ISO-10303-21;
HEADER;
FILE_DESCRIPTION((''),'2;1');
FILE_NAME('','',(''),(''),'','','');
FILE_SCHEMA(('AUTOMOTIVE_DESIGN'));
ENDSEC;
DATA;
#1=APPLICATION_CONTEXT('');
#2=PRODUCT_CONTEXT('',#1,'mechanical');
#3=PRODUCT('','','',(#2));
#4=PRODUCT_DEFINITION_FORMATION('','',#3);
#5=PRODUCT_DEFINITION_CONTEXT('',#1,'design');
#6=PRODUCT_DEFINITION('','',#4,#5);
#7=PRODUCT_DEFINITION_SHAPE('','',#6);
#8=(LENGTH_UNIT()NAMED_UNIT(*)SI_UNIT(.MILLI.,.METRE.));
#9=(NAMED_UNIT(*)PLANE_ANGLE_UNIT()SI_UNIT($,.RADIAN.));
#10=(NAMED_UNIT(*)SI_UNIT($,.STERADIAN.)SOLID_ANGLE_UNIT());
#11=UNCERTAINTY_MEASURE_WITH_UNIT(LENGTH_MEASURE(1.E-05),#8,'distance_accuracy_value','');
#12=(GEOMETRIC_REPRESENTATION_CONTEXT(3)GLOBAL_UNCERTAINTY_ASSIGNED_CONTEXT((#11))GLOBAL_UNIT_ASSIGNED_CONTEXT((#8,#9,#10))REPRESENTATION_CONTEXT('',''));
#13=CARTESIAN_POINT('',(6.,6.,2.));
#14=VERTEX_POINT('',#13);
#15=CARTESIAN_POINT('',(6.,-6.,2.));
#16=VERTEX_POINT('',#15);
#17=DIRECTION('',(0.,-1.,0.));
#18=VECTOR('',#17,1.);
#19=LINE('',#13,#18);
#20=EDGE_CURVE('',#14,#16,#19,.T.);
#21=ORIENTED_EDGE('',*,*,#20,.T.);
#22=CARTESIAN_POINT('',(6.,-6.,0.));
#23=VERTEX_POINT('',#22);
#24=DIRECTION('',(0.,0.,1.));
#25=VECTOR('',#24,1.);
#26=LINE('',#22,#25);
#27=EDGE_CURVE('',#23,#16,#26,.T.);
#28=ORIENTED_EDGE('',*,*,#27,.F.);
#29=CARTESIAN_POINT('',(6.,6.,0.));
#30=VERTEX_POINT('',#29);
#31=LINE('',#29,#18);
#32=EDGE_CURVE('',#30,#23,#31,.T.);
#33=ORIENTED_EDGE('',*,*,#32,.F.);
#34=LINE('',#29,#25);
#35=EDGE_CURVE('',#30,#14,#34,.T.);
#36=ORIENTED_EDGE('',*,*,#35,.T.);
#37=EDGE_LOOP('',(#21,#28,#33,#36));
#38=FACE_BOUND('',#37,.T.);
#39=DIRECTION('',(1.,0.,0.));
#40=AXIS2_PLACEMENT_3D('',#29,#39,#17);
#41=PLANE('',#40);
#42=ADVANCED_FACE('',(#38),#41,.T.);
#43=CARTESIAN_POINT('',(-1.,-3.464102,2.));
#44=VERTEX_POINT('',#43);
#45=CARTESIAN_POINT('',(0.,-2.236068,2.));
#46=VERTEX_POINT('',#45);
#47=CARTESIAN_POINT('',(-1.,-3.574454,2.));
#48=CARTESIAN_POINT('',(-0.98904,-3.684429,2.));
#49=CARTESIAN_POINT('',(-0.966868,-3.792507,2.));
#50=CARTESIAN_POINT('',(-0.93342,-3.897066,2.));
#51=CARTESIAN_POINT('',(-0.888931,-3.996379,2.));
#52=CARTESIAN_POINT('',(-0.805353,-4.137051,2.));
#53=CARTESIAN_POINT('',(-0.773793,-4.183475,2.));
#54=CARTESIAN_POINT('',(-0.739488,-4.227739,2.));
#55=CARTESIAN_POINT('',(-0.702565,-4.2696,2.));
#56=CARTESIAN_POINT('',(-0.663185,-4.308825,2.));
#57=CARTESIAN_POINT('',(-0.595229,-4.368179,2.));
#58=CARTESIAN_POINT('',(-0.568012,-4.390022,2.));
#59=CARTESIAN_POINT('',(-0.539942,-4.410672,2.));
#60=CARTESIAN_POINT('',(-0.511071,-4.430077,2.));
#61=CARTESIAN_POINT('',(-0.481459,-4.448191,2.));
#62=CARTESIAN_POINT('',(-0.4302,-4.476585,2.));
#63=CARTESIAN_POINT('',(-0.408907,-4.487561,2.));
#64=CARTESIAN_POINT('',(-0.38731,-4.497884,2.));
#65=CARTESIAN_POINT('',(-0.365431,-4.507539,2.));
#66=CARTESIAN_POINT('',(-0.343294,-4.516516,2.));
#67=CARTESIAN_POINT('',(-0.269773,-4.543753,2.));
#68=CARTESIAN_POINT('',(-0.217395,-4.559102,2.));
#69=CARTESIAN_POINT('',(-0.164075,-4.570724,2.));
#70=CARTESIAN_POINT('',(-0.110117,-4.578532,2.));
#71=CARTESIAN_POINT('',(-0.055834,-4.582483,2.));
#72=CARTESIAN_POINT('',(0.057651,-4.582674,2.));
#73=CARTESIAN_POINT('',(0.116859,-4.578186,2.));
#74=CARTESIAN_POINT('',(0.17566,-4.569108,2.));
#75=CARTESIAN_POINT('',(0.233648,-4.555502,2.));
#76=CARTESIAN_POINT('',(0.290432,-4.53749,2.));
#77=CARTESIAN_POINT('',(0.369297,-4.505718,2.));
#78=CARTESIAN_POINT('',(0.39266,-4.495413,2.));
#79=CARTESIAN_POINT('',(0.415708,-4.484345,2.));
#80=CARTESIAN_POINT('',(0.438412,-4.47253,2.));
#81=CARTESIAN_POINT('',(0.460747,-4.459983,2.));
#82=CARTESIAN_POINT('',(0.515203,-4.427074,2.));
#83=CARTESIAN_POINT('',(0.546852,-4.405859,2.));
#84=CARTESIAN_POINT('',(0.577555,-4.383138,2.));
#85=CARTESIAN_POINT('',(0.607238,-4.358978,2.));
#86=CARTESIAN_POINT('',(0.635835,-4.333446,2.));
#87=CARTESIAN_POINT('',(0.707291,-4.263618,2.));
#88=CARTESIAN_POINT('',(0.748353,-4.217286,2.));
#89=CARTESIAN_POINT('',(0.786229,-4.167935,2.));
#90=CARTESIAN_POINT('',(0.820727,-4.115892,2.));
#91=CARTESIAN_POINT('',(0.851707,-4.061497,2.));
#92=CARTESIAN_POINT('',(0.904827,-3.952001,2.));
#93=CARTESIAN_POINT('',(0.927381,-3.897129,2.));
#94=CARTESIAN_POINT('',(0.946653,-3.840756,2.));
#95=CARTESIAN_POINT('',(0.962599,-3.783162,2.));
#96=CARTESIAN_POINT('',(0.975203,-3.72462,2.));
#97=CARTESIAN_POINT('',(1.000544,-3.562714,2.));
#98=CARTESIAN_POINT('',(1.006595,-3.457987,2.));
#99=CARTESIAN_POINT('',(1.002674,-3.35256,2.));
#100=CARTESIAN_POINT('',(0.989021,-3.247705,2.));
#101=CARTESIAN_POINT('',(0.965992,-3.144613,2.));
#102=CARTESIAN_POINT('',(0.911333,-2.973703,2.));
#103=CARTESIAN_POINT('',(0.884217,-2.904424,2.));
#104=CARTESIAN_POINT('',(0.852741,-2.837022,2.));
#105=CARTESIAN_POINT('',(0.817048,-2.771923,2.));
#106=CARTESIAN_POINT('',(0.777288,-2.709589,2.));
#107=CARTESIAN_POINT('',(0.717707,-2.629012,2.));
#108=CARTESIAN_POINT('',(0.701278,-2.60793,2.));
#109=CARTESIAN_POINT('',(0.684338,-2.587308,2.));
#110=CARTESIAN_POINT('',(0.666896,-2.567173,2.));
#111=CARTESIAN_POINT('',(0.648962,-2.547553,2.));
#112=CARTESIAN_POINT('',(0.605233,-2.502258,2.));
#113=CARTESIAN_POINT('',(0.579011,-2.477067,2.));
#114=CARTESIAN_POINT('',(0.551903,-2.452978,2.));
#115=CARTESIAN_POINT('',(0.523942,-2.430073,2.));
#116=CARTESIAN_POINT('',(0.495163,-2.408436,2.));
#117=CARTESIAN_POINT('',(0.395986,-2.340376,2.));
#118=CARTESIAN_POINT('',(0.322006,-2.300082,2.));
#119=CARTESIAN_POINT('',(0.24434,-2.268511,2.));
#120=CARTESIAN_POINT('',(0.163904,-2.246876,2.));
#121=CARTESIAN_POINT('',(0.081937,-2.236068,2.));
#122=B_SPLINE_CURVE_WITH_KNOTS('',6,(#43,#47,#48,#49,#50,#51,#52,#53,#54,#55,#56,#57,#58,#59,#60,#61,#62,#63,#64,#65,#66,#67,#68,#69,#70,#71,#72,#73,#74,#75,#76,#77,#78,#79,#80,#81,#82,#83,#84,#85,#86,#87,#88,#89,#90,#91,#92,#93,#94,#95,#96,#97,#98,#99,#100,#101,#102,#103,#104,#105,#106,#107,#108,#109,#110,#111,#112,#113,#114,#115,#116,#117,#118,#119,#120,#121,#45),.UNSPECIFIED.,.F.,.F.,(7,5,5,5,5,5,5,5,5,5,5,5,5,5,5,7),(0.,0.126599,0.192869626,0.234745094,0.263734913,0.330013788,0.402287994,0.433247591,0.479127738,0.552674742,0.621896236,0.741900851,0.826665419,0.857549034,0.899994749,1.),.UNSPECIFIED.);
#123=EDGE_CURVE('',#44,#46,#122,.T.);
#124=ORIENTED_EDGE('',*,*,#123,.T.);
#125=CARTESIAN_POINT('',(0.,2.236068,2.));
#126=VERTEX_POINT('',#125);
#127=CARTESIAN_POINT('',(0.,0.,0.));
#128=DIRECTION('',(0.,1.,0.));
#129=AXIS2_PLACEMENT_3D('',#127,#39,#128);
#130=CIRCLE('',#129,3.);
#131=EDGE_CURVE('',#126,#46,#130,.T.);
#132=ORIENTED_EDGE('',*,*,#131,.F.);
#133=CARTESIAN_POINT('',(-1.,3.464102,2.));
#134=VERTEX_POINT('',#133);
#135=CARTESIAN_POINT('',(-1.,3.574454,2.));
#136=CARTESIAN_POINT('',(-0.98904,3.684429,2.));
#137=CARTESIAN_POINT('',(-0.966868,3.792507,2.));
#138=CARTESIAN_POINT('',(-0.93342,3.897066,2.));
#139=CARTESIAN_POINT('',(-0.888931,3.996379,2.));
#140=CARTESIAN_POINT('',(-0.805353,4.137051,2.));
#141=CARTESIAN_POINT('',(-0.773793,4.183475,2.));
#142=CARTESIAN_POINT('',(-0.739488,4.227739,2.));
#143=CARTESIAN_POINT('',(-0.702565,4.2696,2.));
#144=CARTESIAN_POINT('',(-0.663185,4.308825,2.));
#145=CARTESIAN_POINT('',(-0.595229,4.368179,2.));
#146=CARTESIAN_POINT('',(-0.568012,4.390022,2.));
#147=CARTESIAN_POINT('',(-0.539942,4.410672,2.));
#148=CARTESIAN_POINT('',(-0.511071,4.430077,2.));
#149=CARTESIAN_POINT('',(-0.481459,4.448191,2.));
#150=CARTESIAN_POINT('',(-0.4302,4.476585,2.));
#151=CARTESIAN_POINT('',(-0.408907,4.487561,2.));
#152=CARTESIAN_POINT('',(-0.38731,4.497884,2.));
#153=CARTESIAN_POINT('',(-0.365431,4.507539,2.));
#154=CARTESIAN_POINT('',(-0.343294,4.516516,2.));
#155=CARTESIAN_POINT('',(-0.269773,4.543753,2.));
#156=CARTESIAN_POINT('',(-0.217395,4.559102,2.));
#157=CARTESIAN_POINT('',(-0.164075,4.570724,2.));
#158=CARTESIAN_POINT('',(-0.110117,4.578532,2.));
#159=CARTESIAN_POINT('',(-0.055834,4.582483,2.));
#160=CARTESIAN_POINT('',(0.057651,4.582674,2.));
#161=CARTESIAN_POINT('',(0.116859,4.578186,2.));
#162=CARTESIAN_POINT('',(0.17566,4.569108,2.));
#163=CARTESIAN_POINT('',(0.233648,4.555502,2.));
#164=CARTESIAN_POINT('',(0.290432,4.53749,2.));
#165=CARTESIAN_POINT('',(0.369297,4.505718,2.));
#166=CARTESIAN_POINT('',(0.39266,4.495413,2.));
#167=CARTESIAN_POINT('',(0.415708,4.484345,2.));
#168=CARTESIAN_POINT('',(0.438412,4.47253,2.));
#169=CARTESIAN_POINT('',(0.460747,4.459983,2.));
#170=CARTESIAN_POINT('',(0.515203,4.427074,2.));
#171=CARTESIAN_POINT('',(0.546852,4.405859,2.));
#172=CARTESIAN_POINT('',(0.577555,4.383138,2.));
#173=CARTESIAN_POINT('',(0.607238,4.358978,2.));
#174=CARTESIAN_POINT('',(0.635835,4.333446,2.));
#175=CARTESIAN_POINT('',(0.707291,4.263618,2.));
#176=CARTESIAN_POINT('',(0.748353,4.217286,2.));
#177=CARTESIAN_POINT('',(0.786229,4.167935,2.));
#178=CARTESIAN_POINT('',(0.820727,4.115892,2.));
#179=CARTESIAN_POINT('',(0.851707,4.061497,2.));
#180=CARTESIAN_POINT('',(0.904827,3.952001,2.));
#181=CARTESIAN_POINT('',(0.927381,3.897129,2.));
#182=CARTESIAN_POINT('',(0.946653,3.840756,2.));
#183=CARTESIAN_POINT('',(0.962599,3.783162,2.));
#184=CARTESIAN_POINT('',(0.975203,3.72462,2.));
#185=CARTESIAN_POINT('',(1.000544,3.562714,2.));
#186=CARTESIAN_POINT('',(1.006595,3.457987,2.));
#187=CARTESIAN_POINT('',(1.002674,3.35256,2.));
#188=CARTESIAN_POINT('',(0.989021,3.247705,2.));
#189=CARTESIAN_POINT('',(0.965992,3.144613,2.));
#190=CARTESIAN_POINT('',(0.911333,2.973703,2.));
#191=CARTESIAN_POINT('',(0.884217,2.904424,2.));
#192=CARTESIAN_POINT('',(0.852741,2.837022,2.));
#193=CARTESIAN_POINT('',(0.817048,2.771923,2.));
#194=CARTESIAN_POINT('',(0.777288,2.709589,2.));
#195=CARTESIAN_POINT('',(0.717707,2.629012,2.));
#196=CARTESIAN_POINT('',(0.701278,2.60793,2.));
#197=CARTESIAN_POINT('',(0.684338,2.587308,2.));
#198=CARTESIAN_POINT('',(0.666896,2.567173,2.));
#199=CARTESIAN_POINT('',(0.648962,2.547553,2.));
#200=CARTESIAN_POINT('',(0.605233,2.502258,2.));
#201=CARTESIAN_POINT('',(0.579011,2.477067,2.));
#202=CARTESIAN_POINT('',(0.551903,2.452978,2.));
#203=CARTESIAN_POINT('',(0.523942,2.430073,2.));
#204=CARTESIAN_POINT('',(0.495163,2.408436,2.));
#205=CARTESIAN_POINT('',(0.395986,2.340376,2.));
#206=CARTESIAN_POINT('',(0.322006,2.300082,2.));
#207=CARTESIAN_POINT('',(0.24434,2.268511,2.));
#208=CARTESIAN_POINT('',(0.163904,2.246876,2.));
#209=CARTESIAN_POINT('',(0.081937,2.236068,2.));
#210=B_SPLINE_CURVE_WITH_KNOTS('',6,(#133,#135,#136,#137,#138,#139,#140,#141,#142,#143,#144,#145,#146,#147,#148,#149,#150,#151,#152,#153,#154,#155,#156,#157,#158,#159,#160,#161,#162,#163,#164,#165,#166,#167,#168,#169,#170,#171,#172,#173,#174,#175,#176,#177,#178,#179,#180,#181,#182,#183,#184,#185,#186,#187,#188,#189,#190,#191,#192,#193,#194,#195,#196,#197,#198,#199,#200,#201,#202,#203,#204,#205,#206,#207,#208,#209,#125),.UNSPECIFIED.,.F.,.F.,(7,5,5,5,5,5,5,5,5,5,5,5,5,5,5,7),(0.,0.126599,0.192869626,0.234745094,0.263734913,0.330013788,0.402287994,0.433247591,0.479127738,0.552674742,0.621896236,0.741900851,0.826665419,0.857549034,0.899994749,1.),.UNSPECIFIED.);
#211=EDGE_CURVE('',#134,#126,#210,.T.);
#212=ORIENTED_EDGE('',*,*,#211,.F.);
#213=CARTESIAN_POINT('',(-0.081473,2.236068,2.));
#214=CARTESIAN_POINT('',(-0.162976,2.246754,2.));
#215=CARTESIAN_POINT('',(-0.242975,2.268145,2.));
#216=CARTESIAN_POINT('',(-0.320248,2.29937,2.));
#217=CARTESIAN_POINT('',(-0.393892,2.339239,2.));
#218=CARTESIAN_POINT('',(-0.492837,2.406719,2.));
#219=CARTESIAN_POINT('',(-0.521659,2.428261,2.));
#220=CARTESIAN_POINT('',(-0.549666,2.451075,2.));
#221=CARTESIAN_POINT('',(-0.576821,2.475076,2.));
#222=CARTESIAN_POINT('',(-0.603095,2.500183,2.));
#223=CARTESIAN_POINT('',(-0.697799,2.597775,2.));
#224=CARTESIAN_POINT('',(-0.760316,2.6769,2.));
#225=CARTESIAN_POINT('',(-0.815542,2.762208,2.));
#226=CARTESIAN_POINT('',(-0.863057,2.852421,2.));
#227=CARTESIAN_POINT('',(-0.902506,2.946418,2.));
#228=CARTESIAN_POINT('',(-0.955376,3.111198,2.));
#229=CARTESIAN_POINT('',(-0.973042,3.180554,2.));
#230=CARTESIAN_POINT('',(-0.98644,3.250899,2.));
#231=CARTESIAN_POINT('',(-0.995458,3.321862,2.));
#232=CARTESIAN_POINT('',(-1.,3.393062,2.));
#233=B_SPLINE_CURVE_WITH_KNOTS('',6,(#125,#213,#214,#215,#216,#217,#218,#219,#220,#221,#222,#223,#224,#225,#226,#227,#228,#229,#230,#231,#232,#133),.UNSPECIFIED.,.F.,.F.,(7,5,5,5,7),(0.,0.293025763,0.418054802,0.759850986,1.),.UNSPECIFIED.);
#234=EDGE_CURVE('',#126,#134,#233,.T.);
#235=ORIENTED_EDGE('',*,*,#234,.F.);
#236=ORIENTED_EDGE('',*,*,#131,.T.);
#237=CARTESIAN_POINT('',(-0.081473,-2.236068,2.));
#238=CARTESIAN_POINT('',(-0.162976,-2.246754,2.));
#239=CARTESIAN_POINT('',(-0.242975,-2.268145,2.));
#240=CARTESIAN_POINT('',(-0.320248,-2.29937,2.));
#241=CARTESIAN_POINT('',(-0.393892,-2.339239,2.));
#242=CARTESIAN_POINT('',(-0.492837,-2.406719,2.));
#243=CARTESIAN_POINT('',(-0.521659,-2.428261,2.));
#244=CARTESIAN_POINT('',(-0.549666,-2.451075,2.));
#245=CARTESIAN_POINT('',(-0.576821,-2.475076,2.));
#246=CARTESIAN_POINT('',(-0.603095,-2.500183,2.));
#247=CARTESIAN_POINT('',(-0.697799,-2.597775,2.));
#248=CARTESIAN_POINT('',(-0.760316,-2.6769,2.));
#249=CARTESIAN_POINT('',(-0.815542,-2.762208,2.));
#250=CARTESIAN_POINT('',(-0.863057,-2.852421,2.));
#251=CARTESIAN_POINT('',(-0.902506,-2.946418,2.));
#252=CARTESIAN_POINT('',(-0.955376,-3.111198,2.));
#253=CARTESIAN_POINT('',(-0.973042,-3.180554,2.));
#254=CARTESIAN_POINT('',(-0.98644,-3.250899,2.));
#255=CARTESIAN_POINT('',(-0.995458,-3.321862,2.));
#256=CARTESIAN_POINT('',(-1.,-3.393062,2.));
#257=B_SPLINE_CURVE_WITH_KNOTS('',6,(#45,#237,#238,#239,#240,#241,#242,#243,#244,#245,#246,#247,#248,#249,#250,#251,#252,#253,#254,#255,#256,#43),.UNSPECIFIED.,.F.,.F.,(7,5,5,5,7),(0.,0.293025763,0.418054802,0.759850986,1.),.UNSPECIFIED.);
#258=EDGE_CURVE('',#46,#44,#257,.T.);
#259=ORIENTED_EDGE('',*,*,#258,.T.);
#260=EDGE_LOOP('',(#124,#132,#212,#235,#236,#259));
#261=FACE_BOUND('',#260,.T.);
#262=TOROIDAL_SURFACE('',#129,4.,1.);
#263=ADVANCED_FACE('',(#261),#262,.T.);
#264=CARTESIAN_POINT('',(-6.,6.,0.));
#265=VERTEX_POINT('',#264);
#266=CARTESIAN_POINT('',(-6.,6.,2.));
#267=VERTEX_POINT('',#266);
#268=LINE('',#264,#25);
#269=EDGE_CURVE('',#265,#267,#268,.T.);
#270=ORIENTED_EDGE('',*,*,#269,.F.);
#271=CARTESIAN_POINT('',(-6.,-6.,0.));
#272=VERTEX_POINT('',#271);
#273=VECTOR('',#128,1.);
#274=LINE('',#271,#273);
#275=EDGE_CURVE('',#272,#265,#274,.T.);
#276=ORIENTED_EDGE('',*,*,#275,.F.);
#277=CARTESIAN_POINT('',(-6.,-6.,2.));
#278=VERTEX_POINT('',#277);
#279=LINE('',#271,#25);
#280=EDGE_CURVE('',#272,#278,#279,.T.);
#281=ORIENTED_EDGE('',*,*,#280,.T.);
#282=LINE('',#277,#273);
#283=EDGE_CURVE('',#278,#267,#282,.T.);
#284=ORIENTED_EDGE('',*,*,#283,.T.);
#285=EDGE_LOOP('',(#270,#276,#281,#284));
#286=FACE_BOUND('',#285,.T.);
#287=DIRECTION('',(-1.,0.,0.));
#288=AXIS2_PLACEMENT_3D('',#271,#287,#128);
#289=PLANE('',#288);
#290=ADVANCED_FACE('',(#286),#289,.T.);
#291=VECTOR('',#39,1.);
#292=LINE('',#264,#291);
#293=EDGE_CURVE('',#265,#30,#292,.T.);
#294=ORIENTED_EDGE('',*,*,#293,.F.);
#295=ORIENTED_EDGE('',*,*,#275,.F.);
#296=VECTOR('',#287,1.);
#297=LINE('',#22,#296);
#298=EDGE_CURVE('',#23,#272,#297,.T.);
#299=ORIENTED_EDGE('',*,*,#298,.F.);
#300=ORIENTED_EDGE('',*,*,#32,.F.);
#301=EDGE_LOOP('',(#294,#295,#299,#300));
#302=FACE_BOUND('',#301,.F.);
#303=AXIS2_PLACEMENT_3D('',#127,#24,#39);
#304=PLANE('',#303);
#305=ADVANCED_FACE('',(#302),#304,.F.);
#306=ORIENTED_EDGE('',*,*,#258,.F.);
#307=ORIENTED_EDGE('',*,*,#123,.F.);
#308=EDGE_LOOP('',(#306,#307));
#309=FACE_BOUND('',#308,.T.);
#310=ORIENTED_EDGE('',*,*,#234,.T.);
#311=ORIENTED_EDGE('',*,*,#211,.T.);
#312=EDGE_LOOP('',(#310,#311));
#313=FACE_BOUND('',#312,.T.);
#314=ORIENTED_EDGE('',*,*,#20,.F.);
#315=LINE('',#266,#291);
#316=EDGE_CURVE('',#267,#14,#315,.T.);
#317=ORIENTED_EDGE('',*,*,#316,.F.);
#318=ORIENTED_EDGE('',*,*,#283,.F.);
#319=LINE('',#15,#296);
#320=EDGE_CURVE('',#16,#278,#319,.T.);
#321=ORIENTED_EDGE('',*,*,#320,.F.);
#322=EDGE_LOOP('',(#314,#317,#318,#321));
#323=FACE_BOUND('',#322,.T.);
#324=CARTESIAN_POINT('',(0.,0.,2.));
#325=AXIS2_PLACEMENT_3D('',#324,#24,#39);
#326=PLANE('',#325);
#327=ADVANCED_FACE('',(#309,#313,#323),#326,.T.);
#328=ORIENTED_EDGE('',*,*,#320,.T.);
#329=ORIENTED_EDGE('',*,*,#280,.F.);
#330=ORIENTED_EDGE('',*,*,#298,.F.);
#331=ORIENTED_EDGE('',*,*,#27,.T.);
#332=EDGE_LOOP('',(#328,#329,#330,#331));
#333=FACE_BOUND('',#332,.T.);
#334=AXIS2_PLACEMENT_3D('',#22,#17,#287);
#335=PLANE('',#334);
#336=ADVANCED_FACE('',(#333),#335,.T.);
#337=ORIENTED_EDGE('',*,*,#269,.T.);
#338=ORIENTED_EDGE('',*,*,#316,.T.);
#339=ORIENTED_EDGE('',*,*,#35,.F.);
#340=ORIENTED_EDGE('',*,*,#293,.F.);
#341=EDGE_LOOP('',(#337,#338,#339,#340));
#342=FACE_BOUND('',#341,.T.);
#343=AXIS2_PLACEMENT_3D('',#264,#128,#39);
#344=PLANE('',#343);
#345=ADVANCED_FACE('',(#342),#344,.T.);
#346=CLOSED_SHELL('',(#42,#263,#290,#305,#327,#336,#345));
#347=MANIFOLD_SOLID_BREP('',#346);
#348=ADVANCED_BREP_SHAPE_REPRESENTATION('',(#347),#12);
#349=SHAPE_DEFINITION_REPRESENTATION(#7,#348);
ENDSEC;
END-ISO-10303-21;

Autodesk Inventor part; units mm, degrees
ref_plane "YZ Plane" through (0, 0, 0) normal (1, 0, 0) x (0, 1, 0)
ref_plane "XZ Plane" through (0, 0, 0) normal (0, 1, 0) x (-1, 0, 0)
ref_plane "XY Plane" through (0, 0, 0) normal (0, 0, 1) x (1, 0, 0)
sketch "Sketch1" plane through (0, 0, 0) normal (0, 0, 1) x (1, 0, 0)
  line L0 (-6, 6) -> (6, 6)
  line L1 (6, 6) -> (6, -6)
  line L2 (6, -6) -> (-6, -6)
  line L3 (-6, -6) -> (-6, 6)
  line L4 (-6, 6) -> (6, -6) construction
  line L5 (6, 6) -> (-6, -6) construction
  point P0 (0, 0)
  dimension "d0" = 12
  dimension "d1" = 12
extrude "Extrusion1" add sketch "Sketch1" along normal blind 2
sketch "Sketch2" plane through (0, 0, 0) normal (1, 0, 0) x (0, 1, 0)
  arc A0 (4, 0) -> (-4, 0) centre (0, 0) ccw
  line L0 (-6, 0) -> (6, 0) projected
  dimension "d4" = 8
sketch "Sketch3" plane through (0, 0, 0) normal (0, 0, -1) x (-1, 0, 0)
  circle A0 centre (0, -4) radius 1
  line L0 (0, 4) -> (0, -4) projected
  point P0 (0, 0)
  dimension "d5" = 2
sweep "Sweep1" add profiles "Sketch3" path "Sketch2" path curves A0
properties part number "pad"
